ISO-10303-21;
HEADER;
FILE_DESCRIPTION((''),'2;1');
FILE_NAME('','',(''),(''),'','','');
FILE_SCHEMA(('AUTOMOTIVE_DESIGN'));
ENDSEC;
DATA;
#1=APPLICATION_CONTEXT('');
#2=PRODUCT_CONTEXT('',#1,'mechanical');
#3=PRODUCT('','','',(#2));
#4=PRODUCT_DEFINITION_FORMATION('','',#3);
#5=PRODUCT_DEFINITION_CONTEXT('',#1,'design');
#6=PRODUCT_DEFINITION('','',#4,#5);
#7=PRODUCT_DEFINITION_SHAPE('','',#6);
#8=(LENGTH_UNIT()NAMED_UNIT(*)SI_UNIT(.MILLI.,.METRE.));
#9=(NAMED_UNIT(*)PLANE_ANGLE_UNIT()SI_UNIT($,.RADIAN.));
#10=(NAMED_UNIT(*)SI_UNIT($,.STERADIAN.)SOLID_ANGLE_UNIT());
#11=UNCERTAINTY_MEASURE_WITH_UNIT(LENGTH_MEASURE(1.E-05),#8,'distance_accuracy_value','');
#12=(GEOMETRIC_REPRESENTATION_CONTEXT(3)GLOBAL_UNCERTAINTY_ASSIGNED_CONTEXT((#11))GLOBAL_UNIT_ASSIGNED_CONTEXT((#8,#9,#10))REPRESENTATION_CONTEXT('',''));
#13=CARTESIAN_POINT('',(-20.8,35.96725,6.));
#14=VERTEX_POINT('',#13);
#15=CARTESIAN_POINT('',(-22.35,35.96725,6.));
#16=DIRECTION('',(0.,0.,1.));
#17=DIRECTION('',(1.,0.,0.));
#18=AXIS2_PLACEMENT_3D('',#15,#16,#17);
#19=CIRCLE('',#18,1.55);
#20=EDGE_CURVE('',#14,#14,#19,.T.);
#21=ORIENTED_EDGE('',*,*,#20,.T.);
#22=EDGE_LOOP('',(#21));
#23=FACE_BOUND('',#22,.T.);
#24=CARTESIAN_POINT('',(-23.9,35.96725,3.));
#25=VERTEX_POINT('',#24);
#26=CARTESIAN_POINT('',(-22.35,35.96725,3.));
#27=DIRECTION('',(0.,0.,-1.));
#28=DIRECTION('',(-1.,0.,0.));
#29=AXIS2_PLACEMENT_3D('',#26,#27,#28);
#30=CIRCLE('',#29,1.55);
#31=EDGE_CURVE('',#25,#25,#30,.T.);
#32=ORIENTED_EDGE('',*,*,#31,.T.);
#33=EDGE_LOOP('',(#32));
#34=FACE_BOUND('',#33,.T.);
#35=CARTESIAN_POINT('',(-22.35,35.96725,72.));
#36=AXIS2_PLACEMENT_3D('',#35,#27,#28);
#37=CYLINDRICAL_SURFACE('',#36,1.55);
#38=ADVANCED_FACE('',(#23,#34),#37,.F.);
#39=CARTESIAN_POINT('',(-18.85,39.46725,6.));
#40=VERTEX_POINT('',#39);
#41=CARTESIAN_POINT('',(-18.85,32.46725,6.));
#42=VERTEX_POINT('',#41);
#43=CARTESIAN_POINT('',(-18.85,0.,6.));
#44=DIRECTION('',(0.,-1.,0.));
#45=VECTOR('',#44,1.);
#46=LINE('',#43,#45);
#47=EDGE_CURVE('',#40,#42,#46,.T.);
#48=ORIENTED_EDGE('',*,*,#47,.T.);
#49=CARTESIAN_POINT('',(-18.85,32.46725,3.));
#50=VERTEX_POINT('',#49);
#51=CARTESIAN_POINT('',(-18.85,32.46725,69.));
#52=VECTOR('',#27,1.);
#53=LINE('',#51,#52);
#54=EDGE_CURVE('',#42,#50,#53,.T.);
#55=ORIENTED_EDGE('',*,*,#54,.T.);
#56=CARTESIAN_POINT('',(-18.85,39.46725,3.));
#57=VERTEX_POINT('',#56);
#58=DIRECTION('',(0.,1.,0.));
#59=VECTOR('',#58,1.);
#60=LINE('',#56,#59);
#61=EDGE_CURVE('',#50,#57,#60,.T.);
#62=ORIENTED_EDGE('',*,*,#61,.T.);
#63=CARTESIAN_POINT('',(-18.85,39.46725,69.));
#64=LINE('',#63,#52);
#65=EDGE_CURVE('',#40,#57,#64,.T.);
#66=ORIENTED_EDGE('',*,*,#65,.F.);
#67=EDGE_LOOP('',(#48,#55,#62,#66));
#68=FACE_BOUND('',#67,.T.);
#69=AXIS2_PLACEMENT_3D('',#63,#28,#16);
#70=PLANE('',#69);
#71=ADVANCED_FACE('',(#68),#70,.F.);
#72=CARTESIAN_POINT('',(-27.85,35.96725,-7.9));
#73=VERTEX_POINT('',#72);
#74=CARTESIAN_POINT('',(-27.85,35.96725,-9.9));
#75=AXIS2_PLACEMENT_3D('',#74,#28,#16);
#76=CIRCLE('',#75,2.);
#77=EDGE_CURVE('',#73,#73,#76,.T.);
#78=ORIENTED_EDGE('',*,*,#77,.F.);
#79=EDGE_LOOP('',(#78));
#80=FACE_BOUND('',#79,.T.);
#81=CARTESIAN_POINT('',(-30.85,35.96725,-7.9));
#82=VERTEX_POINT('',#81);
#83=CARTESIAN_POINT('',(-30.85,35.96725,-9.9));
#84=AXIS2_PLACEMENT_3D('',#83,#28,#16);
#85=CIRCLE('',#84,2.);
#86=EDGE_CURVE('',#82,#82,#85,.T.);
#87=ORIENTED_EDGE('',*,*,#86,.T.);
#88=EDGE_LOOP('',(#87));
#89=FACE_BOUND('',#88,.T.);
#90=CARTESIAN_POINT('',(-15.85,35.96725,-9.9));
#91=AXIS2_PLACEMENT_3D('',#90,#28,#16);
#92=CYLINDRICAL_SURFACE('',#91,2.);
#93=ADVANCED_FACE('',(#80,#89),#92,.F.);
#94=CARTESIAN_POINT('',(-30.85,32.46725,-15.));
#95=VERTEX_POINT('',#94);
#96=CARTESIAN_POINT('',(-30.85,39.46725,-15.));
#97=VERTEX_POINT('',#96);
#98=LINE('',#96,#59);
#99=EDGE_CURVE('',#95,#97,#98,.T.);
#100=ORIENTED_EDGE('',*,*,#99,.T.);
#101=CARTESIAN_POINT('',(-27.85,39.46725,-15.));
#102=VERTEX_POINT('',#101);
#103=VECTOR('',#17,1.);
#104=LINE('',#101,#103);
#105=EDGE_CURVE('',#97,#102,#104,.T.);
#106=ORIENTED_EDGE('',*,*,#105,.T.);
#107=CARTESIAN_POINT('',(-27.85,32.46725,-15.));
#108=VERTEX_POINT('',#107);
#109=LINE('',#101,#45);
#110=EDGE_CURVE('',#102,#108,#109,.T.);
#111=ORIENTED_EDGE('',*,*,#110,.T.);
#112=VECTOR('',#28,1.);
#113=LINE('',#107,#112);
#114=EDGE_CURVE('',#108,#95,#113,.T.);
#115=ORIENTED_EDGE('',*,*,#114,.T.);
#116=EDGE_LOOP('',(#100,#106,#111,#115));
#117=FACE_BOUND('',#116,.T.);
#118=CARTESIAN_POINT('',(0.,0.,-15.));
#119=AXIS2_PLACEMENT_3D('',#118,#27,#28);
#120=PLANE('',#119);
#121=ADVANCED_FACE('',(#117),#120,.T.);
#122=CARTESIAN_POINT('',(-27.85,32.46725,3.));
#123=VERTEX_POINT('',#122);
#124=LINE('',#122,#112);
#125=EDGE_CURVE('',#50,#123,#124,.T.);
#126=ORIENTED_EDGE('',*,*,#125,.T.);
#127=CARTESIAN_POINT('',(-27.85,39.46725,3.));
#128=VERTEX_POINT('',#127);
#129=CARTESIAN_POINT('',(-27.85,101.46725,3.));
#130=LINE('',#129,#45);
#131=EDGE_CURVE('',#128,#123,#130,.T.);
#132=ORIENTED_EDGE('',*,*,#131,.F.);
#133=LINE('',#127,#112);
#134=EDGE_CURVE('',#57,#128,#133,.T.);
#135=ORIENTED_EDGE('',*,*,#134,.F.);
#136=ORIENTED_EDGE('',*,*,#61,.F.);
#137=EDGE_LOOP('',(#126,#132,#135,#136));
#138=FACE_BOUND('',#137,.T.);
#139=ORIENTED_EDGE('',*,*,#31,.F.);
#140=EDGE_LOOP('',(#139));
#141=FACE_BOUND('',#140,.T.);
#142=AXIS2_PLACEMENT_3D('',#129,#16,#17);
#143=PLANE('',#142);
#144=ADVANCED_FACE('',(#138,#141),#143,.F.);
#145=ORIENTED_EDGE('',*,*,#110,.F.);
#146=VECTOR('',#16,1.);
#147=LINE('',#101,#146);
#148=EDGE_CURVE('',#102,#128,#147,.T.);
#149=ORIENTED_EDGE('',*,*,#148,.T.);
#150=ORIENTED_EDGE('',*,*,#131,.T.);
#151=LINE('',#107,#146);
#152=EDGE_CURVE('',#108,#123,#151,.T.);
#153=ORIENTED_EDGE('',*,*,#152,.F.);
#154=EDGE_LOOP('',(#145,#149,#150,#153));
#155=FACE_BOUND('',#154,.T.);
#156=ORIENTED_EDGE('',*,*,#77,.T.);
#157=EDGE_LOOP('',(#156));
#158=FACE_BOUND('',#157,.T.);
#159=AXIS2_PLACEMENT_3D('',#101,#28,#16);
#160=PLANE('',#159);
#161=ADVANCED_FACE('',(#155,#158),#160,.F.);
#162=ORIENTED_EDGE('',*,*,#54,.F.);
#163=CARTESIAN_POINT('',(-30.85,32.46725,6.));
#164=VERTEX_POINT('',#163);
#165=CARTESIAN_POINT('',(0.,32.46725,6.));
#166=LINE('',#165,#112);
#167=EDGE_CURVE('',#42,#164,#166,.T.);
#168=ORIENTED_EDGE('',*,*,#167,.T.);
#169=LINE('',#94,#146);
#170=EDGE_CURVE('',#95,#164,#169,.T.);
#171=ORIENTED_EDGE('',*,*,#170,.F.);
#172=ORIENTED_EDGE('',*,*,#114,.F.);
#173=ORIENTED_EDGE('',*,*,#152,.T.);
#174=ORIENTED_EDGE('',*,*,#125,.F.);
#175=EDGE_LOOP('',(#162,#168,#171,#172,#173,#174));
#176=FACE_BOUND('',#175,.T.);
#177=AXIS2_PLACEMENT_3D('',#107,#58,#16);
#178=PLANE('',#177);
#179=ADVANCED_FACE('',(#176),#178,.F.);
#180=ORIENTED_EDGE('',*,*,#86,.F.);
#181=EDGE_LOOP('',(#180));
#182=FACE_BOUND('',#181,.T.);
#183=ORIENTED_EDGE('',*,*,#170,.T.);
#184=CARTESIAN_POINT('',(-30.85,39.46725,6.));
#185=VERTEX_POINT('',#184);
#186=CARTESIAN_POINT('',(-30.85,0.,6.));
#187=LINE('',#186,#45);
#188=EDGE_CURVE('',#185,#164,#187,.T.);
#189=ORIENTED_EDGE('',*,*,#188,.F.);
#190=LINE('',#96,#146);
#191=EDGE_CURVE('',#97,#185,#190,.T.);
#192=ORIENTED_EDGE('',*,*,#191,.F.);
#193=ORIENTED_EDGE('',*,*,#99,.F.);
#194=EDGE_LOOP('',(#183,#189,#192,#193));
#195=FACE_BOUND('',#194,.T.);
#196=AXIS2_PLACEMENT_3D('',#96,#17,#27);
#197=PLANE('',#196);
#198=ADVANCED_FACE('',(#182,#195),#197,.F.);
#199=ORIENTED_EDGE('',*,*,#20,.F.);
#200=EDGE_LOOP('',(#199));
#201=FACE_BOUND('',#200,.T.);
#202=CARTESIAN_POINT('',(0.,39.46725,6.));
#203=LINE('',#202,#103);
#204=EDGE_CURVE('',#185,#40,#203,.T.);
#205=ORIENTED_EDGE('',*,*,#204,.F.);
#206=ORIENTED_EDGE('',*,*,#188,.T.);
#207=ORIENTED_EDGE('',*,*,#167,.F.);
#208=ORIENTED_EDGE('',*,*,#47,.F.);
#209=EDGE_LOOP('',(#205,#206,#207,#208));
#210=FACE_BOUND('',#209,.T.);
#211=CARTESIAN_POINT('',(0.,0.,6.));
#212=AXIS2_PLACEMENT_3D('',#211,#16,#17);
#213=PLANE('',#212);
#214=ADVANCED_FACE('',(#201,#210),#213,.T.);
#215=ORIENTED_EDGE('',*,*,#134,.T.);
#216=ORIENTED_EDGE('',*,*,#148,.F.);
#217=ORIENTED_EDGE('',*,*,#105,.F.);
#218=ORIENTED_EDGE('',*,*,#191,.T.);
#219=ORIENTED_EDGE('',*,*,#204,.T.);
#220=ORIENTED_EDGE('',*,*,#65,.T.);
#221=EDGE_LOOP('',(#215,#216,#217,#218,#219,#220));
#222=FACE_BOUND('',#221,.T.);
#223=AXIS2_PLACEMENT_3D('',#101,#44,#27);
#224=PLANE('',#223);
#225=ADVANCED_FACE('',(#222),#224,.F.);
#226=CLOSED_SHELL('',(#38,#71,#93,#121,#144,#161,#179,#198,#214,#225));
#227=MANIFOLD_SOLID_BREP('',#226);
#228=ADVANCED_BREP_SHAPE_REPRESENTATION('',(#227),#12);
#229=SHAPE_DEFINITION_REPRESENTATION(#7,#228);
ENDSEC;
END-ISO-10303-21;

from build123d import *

# Parameters (mm, degrees)
SKETCH1_W           = 132
SKETCH1_H           = 160
BOSS_EXTRUDE1_DEPTH = 6
SKETCH3_W           = 32
SKETCH3_H           = 54
SKETCH3_W_2         = 26
SKETCH3_H_2         = 48
BOSS_EXTRUDE2_DEPTH = 17.5
SKETCH4_W           = 32
SKETCH4_H           = 54
BOSS_EXTRUDE3_DEPTH = 3
SKETCH5_W           = 25
SKETCH5_H           = 17
CUT_EXTRUDE1_DEPTH  = 3
SKETCH6_W           = 12
SKETCH6_H           = 54
BOSS_EXTRUDE4_DEPTH = 3
SKETCH7_R           = 1.6
CUT_EXTRUDE2_DEPTH  = 106.177231376
SKETCH8_W           = 3
SKETCH8_H           = 6.5
BOSS_EXTRUDE5_DEPTH = 20
SKETCH9_R           = 1.55
CUT_EXTRUDE3_DEPTH  = 6
SKETCH10_R          = 1.6
CUT_EXTRUDE4_DEPTH  = 108.043215572
SKETCH11_W          = 2.5
SKETCH11_H          = 7
BOSS_EXTRUDE6_DEPTH = 19.36
SKETCH12_R          = 1.6
CUT_EXTRUDE5_DEPTH  = 19.36
SKETCH13_W          = 3
SKETCH13_H          = 7
BOSS_EXTRUDE7_DEPTH = 15
SKETCH14_R          = 2
CUT_EXTRUDE6_DEPTH  = 15
CUT_EXTRUDE7_START  = -6
CUT_EXTRUDE7_DEPTH  = 6
SKETCH16_R          = 1.6
CUT_EXTRUDE8_DEPTH  = 15
CUT_EXTRUDE9_DEPTH  = 69
SKETCH18_W          = 9
SKETCH18_H          = 3
CUT_EXTRUDE10_DEPTH = 69
SKETCH19_R          = 1.55
CUT_EXTRUDE11_DEPTH = 69


# Read off the part's stored shape, not the designer's step: Cut-Extrude7
with BuildPart() as part:
    # Sketch1 → Boss-Extrude1 (new body)
    with BuildSketch(Plane.XY):
        Rectangle(SKETCH1_W, SKETCH1_H)
    extrude(amount=BOSS_EXTRUDE1_DEPTH)

    # Sketch3 → Boss-Extrude2 (add)
    with BuildSketch(Plane.XY.offset(6)):
        with Locations((0, -53)):
            Rectangle(SKETCH3_W, SKETCH3_H)
        with Locations((0, -53)):
            Rectangle(SKETCH3_W_2, SKETCH3_H_2, mode=Mode.SUBTRACT)
    extrude(amount=BOSS_EXTRUDE2_DEPTH)

    # Sketch4 → Boss-Extrude3 (add)
    with BuildSketch(Plane.XY.offset(23.5)):
        with Locations((0, -53)):
            Rectangle(SKETCH4_W, SKETCH4_H)
    extrude(amount=BOSS_EXTRUDE3_DEPTH)

    # Sketch5 → Cut-Extrude1 (cut)
    with BuildSketch(Plane.XZ.offset(80)):
        with Locations((0, 14.5)):
            Rectangle(SKETCH5_W, SKETCH5_H)
    extrude(amount=-CUT_EXTRUDE1_DEPTH, mode=Mode.SUBTRACT)

    # Sketch6 → Boss-Extrude4 (add)
    with BuildSketch(Plane.XY.offset(6)):
        with Locations((-22, -53)):
            Rectangle(SKETCH6_W, SKETCH6_H)
        with Locations((22, -53)):
            Rectangle(SKETCH6_W, SKETCH6_H)
    extrude(amount=BOSS_EXTRUDE4_DEPTH)

    # Sketch7 → Cut-Extrude2 (cut, through all)
    with BuildSketch(Plane.XY.offset(9)):
        with Locations((-22, -69)):
            Circle(SKETCH7_R)
        with Locations((-22, -33)):
            Circle(SKETCH7_R)
        with Locations(Location((22, -69, 0), (0, 0, 180))):
            Circle(SKETCH7_R)
        with Locations(Location((22, -33, 0), (0, 0, 180))):
            Circle(SKETCH7_R)
    extrude(amount=-CUT_EXTRUDE2_DEPTH, mode=Mode.SUBTRACT)

    # Sketch8 → Boss-Extrude5 (add)
    with BuildSketch(Plane.XY.offset(6)):
        with Locations((-54.38, -76.75)):
            Rectangle(SKETCH8_W, SKETCH8_H)
        with Locations((-54.38, -30.25)):
            Rectangle(SKETCH8_W, SKETCH8_H)
    boss_extrude5 = extrude(amount=BOSS_EXTRUDE5_DEPTH)

    # Sketch9 → Cut-Extrude3 (cut)
    with BuildSketch(Plane.ZY.offset(55.88)):
        with Locations((10.35, -76.75)):
            Circle(SKETCH9_R)
        with Locations((19.65, -76.75)):
            Circle(SKETCH9_R)
        with Locations((10.35, -30.25)):
            Circle(SKETCH9_R)
        with Locations((19.65, -30.25)):
            Circle(SKETCH9_R)
    cut_extrude3 = extrude(amount=-CUT_EXTRUDE3_DEPTH, mode=Mode.SUBTRACT)

    # Mirror1: Boss-Extrude5, Cut-Extrude3 across plane
    add(boss_extrude5.mirror(Plane(origin=(0, 0, 0), x_dir=(0, 0, 1), z_dir=(1, 0, 0))))
    add(cut_extrude3.mirror(Plane(origin=(0, 0, 0), x_dir=(0, 0, 1), z_dir=(1, 0, 0))), mode=Mode.SUBTRACT)

    # Sketch10 → Cut-Extrude4 (cut, through all)
    with BuildSketch(Plane(origin=(0, 0, 0), x_dir=(-1, 0, 0), z_dir=(0, 0, -1))):
        with Locations((-24.1, -75.572749788)):
            Circle(SKETCH10_R)
        with Locations((-21.15, -12.732749788)):
            Circle(SKETCH10_R)
        with Locations(Location((21.15, -12.732749788, 0), (0, 0, 180))):
            Circle(SKETCH10_R)
        with Locations((24.1, -75.572749788)):
            Circle(SKETCH10_R)
    extrude(amount=-CUT_EXTRUDE4_DEPTH, mode=Mode.SUBTRACT)

    # Sketch11 → Boss-Extrude6 (add)
    with BuildSketch(Plane(origin=(0, 0, 0), x_dir=(-1, 0, 0), z_dir=(0, 0, -1))):
        with Locations((-17.9, 1.267250212)):
            Rectangle(SKETCH11_W, SKETCH11_H)
        with Locations((-17.9, 50.267250212)):
            Rectangle(SKETCH11_W, SKETCH11_H)
    extrude(amount=BOSS_EXTRUDE6_DEPTH)

    # Sketch12 → Cut-Extrude5 (cut)
    with BuildSketch(Plane(origin=(19.15, 0, 0), x_dir=(0, 0, -1), z_dir=(1, 0, 0))):
        with Locations(Location((4.5, 50.267250212, 0), (0, 0, 90))):
            Circle(SKETCH12_R)
        with Locations(Location((14.5, 50.267250212, 0), (0, 0, 90))):
            Circle(SKETCH12_R)
        with Locations(Location((4.5, 1.267250212, 0), (0, 0, 90))):
            Circle(SKETCH12_R)
        with Locations(Location((14.5, 1.267250212, 0), (0, 0, 90))):
            Circle(SKETCH12_R)
    extrude(amount=-CUT_EXTRUDE5_DEPTH, mode=Mode.SUBTRACT)

    # Sketch13 → Boss-Extrude7 (add)
    with BuildSketch(Plane(origin=(0, 0, 0), x_dir=(-1, 0, 0), z_dir=(0, 0, -1))):
        with Locations((29.35, 35.967250212)):
            Rectangle(SKETCH13_W, SKETCH13_H)
    extrude(amount=BOSS_EXTRUDE7_DEPTH)

    # Sketch14 → Cut-Extrude6 (cut)
    with BuildSketch(Plane.ZY.offset(30.85)):
        with Locations((-9.9, 35.967250212)):
            Circle(SKETCH14_R)
    extrude(amount=-CUT_EXTRUDE6_DEPTH, mode=Mode.SUBTRACT)

    # Cut-Extrude7 outline → Cut-Extrude7 (cut)
    with BuildSketch(Plane(origin=(0, 0, 0), x_dir=(-1, 0, 0), z_dir=(0, 0, -1)).offset(CUT_EXTRUDE7_START)):
        Polygon((-30.85, 56.767250212), (30.85, 56.767250212), (30.85, -24), (58.88, -24), (58.88, -80), (66, -80), (66, 80), (-66, 80), (-66, -80), (-58.88, -80), (-58.88, -24), (-30.85, -24), align=None)
    extrude(amount=CUT_EXTRUDE7_DEPTH, mode=Mode.SUBTRACT)

    # Sketch16 → Cut-Extrude8 (cut)
    with BuildSketch(Plane(origin=(0, 0, 0), x_dir=(-1, 0, 0), z_dir=(0, 0, -1))):
        Circle(SKETCH16_R)
        with Locations((0, 52.767250212)):
            Circle(SKETCH16_R)
    extrude(amount=-CUT_EXTRUDE8_DEPTH, mode=Mode.SUBTRACT)

    # Sketch17 → Cut-Extrude9 (cut)
    with BuildSketch(Plane(origin=(0, 0, 0), x_dir=(-1, 0, 0), z_dir=(0, 0, -1))):
        Polygon((-30.85, 56.767250212), (30.85, 56.767250212), (30.85, 39.467250212), (18.85, 39.467250212), (18.85, 32.467250212), (30.85, 32.467250212), (58.88, -24), (58.88, -80), (-58.88, -80), (-58.88, 56.767250212), align=None)
    extrude(amount=-CUT_EXTRUDE9_DEPTH, mode=Mode.SUBTRACT)


with BuildPart() as body_2:
    # of the pieces the cut leaves, the one that is kept (cut_extrude9_keep)
    add(part.part.solids().sort_by_distance((-27.85, 39.467250212, 0))[0])

    # Sketch18 → Cut-Extrude10 (cut)
    with BuildSketch(Plane.XZ.offset(-32.467250212)):
        with Locations((-23.35, 1.5)):
            Rectangle(SKETCH18_W, SKETCH18_H)
    extrude(amount=-CUT_EXTRUDE10_DEPTH, mode=Mode.SUBTRACT)

    # Sketch19 → Cut-Extrude11 (cut)
    with BuildSketch(Plane(origin=(0, 0, 3), x_dir=(-1, 0, 0), z_dir=(0, 0, -1))):
        with Locations((22.35, 35.967250212)):
            Circle(SKETCH19_R)
    extrude(amount=-CUT_EXTRUDE11_DEPTH, mode=Mode.SUBTRACT)


solid = body_2.part
